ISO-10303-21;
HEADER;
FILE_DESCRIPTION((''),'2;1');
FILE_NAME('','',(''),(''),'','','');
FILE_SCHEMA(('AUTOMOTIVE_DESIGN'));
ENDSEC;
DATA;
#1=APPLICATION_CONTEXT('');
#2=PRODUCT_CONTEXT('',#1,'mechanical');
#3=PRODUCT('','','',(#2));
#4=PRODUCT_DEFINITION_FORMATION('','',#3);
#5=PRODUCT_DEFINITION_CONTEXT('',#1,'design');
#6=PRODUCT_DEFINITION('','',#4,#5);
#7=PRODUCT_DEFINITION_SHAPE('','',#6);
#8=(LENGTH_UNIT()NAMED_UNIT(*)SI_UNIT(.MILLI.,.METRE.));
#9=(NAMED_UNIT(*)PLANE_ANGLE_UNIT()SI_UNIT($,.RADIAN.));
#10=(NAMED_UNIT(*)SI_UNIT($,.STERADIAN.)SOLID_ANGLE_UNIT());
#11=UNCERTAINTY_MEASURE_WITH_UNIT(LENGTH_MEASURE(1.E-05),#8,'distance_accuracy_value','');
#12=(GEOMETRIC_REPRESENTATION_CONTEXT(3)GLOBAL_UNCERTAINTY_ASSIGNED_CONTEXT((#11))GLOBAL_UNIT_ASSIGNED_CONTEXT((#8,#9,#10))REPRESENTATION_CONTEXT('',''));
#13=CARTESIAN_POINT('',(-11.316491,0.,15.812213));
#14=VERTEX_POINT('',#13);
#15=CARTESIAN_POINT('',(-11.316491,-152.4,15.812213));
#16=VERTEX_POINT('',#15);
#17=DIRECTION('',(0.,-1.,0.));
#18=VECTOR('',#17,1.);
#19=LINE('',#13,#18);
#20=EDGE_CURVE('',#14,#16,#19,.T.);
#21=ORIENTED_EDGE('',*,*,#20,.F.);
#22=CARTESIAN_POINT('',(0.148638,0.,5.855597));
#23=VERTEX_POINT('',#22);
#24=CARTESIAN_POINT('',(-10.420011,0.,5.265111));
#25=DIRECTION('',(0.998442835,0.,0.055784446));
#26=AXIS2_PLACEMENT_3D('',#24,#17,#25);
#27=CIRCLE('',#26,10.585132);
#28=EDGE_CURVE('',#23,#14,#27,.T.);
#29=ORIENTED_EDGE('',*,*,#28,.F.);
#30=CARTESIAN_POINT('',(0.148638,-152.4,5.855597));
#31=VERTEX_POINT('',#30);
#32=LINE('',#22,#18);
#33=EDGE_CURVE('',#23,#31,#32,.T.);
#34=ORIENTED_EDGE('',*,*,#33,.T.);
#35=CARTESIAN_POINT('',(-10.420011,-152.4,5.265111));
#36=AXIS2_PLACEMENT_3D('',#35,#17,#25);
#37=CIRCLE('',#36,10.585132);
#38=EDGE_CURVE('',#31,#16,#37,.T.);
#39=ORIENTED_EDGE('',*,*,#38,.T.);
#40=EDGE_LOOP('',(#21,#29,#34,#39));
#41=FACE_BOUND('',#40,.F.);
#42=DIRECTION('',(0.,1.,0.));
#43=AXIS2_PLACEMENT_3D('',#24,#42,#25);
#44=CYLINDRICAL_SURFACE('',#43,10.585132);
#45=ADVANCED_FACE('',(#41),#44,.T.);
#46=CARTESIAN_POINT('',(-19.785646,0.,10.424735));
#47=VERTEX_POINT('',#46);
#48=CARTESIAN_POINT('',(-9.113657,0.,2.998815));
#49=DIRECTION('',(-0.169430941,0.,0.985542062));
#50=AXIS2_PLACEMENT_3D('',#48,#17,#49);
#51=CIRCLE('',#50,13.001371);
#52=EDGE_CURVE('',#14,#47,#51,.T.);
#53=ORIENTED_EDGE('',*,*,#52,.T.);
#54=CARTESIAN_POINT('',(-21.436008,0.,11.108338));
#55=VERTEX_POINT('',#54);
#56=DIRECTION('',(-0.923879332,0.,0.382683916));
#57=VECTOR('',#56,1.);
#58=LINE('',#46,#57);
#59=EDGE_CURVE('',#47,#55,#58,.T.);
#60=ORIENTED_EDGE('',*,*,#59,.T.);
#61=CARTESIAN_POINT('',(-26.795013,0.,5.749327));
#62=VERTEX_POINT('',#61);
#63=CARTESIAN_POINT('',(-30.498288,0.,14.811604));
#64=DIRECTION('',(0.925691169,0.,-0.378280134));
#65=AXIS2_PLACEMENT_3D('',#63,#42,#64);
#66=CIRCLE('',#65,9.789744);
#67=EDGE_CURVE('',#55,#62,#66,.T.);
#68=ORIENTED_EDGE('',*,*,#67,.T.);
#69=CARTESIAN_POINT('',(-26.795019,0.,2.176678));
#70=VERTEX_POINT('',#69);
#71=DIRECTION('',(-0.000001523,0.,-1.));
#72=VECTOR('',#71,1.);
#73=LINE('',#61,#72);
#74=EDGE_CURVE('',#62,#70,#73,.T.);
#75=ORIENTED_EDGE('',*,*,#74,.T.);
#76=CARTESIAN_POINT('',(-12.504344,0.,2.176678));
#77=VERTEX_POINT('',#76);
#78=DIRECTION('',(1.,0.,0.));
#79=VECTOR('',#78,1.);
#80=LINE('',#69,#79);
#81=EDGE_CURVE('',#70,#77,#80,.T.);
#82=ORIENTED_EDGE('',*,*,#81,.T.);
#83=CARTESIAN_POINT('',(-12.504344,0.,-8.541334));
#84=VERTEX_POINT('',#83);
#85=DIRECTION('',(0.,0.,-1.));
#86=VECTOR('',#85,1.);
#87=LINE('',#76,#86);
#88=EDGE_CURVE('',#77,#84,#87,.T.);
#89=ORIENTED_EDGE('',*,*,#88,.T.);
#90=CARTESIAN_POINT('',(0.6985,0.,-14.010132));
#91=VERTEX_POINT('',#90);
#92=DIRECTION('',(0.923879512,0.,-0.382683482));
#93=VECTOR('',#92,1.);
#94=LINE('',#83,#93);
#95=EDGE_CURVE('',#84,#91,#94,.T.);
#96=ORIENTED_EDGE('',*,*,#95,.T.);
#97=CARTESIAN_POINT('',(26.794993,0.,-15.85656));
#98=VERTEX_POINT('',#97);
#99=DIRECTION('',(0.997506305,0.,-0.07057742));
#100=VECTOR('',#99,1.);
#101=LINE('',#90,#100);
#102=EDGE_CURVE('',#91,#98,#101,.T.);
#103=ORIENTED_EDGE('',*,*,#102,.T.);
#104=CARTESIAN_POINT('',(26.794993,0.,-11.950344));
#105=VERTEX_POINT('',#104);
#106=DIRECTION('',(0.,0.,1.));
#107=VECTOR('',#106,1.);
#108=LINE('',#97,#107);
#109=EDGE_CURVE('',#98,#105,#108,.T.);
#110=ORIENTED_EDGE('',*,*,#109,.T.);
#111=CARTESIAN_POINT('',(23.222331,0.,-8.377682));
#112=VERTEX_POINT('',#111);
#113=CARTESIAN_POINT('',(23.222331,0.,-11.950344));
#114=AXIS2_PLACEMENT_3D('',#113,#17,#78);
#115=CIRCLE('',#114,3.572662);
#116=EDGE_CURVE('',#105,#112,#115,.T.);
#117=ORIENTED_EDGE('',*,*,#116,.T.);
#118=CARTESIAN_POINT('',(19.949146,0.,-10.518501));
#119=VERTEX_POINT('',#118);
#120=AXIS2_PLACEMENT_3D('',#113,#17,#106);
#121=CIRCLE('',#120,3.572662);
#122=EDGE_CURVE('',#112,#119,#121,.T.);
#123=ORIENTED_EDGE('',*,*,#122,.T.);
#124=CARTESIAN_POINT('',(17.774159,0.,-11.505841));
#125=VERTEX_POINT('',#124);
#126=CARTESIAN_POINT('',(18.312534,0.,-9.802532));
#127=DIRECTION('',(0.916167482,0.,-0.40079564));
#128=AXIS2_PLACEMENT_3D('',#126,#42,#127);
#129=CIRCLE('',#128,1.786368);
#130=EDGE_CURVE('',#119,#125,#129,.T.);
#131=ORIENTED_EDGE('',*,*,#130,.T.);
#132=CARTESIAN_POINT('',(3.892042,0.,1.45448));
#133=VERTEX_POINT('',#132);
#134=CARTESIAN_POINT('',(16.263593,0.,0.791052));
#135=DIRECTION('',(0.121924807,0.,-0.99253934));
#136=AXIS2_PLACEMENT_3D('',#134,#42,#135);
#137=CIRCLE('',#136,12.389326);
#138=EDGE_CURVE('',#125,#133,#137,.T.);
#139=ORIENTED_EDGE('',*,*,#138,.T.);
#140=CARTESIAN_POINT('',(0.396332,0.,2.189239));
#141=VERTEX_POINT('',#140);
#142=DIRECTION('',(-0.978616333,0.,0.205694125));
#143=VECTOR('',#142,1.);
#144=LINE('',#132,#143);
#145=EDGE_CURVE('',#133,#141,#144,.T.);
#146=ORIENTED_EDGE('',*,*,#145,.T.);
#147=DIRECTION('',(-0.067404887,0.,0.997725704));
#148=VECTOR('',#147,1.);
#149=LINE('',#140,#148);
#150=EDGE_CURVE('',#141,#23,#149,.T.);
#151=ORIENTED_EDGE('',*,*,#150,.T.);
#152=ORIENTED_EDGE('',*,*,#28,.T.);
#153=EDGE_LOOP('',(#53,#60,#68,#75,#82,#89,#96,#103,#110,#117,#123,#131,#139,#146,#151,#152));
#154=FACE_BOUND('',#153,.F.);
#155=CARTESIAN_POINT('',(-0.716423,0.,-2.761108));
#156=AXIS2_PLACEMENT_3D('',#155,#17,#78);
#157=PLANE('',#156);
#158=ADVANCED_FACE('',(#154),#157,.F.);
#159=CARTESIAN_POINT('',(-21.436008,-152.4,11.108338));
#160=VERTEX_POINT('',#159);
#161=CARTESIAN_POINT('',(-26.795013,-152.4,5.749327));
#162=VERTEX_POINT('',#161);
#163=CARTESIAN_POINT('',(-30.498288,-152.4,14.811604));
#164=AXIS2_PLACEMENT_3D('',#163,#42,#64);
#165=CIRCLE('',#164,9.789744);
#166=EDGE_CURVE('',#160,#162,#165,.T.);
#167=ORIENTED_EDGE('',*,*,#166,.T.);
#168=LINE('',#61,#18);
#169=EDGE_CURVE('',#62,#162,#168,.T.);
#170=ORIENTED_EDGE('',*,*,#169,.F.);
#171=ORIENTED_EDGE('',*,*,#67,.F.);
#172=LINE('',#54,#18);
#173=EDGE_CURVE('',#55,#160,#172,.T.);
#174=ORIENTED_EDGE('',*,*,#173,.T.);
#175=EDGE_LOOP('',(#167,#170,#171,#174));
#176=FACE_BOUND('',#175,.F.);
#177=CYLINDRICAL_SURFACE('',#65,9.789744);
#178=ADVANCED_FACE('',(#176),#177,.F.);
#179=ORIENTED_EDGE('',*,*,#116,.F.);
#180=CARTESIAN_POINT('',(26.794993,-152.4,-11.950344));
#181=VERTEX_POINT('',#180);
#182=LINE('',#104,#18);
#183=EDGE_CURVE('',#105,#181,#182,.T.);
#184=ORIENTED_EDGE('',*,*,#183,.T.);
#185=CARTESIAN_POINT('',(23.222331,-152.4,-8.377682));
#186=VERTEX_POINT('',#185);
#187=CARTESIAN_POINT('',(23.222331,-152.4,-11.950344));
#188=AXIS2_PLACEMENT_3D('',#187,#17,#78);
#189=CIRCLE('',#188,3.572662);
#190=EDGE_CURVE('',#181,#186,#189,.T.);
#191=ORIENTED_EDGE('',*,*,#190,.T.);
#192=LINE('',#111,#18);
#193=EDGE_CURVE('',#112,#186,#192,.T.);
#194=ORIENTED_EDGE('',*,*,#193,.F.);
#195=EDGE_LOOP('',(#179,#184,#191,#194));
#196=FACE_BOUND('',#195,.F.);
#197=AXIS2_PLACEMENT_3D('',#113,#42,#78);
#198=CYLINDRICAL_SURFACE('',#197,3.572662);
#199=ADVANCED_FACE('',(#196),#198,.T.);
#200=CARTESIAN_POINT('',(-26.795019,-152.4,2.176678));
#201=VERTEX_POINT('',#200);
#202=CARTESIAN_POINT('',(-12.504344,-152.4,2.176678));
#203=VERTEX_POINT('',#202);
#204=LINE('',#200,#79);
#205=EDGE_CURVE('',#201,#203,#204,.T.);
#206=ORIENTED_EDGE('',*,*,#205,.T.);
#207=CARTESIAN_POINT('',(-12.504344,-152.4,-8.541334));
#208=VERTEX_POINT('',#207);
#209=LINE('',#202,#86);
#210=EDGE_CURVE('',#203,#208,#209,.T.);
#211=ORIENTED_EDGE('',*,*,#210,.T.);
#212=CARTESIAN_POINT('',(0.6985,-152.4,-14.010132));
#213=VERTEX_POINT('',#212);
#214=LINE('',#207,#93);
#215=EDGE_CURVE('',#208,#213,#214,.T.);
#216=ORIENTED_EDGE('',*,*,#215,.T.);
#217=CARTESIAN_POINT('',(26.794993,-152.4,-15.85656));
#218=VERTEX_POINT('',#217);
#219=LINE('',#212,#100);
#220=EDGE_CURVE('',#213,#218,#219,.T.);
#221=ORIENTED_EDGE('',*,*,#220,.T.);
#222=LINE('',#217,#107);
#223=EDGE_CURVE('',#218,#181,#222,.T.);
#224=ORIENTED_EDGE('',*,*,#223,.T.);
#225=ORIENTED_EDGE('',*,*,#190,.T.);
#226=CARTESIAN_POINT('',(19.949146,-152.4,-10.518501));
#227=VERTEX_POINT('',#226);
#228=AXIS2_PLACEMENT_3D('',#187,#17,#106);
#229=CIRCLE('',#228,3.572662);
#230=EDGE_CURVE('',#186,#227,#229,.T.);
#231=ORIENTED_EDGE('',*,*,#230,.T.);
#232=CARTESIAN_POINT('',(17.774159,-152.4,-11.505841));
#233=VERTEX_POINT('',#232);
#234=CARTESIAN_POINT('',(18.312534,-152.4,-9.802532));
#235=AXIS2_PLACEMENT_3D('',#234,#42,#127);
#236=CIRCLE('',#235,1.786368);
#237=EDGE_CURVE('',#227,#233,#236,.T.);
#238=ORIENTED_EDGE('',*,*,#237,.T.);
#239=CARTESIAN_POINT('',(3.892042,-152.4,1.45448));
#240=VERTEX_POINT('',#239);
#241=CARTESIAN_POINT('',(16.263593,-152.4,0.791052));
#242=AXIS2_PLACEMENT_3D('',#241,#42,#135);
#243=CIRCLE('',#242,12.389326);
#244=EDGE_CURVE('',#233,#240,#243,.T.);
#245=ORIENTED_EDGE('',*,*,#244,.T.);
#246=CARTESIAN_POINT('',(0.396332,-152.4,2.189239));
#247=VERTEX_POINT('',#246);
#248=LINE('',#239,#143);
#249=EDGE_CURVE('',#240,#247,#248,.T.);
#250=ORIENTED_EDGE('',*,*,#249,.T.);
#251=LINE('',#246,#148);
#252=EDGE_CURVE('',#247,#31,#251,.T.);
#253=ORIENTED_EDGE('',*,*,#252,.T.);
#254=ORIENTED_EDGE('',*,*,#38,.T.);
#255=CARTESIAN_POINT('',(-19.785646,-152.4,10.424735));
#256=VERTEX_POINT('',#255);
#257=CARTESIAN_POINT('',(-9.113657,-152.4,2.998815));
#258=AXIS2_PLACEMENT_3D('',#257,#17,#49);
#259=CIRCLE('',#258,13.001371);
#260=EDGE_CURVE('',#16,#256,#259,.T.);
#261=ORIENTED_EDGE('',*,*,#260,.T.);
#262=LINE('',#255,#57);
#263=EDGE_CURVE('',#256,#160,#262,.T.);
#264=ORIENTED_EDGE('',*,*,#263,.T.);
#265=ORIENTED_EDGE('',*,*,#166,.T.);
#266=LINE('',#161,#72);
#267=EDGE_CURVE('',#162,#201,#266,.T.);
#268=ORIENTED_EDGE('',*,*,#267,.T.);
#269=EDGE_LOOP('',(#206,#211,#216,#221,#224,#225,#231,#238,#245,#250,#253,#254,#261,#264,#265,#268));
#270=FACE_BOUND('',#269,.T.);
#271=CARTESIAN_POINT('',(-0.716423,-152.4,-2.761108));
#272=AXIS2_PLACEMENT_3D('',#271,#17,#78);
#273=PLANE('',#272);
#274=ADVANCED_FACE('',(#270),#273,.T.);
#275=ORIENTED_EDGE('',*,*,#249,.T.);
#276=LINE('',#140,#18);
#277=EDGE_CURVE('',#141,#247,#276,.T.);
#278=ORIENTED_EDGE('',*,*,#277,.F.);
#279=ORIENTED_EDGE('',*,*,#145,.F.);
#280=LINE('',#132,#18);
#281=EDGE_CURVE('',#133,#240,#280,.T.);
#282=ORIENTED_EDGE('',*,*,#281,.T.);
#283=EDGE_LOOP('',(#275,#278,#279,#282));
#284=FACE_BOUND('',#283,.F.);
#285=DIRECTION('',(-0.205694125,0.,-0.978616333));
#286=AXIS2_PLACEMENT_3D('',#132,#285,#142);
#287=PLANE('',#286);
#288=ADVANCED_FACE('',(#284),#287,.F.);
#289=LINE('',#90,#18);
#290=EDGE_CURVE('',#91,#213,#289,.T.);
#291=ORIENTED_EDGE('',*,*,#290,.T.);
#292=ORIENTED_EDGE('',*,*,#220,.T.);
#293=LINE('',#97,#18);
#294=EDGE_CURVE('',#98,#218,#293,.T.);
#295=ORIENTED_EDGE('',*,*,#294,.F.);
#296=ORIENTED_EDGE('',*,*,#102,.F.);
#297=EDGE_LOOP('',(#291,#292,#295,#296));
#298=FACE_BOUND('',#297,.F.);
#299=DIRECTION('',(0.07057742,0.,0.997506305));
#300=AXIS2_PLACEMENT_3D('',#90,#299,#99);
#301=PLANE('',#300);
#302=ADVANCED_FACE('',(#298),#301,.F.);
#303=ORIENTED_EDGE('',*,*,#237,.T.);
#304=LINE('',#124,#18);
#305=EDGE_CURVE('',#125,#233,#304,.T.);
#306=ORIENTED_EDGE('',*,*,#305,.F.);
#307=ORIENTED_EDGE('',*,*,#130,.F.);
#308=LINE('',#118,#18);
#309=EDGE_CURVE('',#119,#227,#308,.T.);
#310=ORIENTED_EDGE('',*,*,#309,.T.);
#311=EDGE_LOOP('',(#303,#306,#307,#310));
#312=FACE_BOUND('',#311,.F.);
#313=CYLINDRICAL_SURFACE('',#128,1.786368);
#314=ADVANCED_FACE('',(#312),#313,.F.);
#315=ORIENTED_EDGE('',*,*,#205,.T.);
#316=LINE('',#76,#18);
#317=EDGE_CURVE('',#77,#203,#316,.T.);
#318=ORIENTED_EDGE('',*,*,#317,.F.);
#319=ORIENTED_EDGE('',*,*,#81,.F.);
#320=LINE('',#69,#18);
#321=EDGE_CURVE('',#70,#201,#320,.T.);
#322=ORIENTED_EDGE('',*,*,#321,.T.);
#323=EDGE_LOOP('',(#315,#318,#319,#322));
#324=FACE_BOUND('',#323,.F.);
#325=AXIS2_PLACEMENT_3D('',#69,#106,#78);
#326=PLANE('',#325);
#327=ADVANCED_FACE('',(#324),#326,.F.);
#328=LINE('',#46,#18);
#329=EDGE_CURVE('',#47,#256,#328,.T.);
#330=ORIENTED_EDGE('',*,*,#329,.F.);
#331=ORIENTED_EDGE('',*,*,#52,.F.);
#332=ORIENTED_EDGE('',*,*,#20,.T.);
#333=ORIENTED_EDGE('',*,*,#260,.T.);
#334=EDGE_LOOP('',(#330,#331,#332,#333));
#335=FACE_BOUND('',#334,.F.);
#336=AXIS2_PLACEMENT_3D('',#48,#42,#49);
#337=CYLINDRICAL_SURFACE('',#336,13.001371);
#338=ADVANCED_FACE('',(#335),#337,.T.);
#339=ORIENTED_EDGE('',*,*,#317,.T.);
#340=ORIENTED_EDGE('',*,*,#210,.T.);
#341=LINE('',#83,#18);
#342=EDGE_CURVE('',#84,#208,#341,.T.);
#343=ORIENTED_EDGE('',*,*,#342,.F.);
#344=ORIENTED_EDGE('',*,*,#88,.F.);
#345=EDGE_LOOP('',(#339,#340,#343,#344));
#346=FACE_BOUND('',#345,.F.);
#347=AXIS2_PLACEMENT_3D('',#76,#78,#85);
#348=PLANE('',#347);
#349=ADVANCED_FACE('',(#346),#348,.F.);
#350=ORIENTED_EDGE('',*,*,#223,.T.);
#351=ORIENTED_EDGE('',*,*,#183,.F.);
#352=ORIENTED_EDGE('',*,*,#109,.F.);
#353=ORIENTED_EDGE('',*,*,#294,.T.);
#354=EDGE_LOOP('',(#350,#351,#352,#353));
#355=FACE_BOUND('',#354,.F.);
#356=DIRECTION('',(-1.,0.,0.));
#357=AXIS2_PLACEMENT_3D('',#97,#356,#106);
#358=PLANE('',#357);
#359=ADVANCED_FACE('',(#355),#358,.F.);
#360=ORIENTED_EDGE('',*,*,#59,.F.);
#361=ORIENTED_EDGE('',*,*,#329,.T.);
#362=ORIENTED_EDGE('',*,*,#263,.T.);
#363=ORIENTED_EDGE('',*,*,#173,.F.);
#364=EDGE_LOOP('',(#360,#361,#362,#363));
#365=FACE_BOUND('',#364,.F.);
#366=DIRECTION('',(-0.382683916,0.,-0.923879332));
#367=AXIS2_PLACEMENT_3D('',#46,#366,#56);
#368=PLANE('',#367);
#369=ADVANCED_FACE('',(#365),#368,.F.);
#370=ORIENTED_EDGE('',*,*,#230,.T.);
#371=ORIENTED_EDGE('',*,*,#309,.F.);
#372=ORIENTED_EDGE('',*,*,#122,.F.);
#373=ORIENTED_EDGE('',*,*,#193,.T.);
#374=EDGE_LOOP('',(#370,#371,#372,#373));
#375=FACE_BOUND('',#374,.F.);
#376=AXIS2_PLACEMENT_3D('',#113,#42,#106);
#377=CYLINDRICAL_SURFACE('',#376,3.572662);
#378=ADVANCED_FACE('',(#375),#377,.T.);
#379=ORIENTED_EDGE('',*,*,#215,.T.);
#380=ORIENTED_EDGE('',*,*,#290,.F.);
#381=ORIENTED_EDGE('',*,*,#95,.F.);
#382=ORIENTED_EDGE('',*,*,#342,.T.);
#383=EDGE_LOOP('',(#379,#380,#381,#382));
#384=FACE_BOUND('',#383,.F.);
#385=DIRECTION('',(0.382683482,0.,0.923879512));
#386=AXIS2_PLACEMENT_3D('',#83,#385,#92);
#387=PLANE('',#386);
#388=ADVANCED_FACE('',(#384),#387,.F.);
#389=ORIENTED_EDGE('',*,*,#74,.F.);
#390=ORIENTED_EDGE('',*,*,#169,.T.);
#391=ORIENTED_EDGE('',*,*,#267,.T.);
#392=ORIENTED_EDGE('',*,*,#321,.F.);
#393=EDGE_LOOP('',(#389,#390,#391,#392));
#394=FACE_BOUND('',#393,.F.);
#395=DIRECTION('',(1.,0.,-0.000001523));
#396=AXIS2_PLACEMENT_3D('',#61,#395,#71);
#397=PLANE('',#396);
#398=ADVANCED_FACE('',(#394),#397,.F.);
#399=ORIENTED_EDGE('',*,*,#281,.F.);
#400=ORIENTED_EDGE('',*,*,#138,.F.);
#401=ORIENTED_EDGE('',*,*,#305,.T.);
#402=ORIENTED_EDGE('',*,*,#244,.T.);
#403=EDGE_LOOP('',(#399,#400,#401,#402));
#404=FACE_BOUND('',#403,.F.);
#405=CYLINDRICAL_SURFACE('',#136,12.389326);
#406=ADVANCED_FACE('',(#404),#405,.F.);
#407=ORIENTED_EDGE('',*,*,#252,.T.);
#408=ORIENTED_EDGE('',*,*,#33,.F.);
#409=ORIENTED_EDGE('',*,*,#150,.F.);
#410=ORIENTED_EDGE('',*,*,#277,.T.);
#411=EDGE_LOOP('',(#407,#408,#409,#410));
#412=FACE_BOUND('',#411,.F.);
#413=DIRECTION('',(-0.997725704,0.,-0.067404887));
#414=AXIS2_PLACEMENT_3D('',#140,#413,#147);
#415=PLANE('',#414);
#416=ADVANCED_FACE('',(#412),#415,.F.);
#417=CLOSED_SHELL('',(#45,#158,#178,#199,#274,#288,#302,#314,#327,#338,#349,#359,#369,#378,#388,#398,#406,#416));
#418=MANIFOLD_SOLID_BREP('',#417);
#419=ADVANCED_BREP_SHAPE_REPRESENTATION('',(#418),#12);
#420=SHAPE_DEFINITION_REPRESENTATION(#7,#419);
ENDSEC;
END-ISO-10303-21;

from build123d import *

# Parameters (mm, degrees)
F1_DEPTH = 152.4


# Not quite as in the source:
# - ends of sketch curves that miss each other by under 0.0002 mm in the source are joined


with BuildPart() as f1:
    # F0 (on Front) → F1 (new body)
    with BuildSketch(Plane.XZ):
        with BuildLine():
            ThreePointArc((-21.436008248, 11.1083378523), (-23.575890093, 7.8892124872), (-26.7950133579, 5.7493274827))
            Line((-26.7950133579, 5.7493274827), (-26.7950188, 2.1766784))
            Line((-26.7950188, 2.1766784), (-12.5043438, 2.1766784))
            Line((-12.5043438, 2.1766784), (-12.5043438, -8.5413342))
            Line((-12.5043438, -8.5413342), (0.6985, -14.010132))
            Line((0.6985, -14.010132), (26.7949934, -15.8565596))
            Line((26.7949934, -15.8565596), (26.7949934, -11.9503444))
            ThreePointArc((26.7949934, -11.9503444), (25.7485848099, -9.4240905901), (23.222331, -8.377682))
            ThreePointArc((23.222331, -8.377682), (21.2667719884, -8.9604103578), (19.949146016, -10.5185005939))
            ThreePointArc((19.949146016, -10.5185005939), (19.0509354729, -11.4291461184), (17.7741589903, -11.5058412669))
            ThreePointArc((17.7741589903, -11.5058412669), (7.8088470745, -8.265032818), (3.892042, 1.4544802))
            Line((3.892042, 1.4544802), (0.3963321215, 2.1892390214))
            Line((0.3963321215, 2.1892390214), (0.1486383408, 5.85559709))
            ThreePointArc((0.1486383408, 5.85559709), (-3.4794590188, 13.2572174827), (-11.3164912909, 15.8122126013))
            ThreePointArc((-11.3164912909, 15.8122126013), (-16.0919447869, 13.968734586), (-19.7856463188, 10.4247345468))
            Line((-19.7856463188, 10.4247345468), (-21.436008248, 11.1083378523))
        make_face()
    extrude(amount=F1_DEPTH)


solid = f1.part
